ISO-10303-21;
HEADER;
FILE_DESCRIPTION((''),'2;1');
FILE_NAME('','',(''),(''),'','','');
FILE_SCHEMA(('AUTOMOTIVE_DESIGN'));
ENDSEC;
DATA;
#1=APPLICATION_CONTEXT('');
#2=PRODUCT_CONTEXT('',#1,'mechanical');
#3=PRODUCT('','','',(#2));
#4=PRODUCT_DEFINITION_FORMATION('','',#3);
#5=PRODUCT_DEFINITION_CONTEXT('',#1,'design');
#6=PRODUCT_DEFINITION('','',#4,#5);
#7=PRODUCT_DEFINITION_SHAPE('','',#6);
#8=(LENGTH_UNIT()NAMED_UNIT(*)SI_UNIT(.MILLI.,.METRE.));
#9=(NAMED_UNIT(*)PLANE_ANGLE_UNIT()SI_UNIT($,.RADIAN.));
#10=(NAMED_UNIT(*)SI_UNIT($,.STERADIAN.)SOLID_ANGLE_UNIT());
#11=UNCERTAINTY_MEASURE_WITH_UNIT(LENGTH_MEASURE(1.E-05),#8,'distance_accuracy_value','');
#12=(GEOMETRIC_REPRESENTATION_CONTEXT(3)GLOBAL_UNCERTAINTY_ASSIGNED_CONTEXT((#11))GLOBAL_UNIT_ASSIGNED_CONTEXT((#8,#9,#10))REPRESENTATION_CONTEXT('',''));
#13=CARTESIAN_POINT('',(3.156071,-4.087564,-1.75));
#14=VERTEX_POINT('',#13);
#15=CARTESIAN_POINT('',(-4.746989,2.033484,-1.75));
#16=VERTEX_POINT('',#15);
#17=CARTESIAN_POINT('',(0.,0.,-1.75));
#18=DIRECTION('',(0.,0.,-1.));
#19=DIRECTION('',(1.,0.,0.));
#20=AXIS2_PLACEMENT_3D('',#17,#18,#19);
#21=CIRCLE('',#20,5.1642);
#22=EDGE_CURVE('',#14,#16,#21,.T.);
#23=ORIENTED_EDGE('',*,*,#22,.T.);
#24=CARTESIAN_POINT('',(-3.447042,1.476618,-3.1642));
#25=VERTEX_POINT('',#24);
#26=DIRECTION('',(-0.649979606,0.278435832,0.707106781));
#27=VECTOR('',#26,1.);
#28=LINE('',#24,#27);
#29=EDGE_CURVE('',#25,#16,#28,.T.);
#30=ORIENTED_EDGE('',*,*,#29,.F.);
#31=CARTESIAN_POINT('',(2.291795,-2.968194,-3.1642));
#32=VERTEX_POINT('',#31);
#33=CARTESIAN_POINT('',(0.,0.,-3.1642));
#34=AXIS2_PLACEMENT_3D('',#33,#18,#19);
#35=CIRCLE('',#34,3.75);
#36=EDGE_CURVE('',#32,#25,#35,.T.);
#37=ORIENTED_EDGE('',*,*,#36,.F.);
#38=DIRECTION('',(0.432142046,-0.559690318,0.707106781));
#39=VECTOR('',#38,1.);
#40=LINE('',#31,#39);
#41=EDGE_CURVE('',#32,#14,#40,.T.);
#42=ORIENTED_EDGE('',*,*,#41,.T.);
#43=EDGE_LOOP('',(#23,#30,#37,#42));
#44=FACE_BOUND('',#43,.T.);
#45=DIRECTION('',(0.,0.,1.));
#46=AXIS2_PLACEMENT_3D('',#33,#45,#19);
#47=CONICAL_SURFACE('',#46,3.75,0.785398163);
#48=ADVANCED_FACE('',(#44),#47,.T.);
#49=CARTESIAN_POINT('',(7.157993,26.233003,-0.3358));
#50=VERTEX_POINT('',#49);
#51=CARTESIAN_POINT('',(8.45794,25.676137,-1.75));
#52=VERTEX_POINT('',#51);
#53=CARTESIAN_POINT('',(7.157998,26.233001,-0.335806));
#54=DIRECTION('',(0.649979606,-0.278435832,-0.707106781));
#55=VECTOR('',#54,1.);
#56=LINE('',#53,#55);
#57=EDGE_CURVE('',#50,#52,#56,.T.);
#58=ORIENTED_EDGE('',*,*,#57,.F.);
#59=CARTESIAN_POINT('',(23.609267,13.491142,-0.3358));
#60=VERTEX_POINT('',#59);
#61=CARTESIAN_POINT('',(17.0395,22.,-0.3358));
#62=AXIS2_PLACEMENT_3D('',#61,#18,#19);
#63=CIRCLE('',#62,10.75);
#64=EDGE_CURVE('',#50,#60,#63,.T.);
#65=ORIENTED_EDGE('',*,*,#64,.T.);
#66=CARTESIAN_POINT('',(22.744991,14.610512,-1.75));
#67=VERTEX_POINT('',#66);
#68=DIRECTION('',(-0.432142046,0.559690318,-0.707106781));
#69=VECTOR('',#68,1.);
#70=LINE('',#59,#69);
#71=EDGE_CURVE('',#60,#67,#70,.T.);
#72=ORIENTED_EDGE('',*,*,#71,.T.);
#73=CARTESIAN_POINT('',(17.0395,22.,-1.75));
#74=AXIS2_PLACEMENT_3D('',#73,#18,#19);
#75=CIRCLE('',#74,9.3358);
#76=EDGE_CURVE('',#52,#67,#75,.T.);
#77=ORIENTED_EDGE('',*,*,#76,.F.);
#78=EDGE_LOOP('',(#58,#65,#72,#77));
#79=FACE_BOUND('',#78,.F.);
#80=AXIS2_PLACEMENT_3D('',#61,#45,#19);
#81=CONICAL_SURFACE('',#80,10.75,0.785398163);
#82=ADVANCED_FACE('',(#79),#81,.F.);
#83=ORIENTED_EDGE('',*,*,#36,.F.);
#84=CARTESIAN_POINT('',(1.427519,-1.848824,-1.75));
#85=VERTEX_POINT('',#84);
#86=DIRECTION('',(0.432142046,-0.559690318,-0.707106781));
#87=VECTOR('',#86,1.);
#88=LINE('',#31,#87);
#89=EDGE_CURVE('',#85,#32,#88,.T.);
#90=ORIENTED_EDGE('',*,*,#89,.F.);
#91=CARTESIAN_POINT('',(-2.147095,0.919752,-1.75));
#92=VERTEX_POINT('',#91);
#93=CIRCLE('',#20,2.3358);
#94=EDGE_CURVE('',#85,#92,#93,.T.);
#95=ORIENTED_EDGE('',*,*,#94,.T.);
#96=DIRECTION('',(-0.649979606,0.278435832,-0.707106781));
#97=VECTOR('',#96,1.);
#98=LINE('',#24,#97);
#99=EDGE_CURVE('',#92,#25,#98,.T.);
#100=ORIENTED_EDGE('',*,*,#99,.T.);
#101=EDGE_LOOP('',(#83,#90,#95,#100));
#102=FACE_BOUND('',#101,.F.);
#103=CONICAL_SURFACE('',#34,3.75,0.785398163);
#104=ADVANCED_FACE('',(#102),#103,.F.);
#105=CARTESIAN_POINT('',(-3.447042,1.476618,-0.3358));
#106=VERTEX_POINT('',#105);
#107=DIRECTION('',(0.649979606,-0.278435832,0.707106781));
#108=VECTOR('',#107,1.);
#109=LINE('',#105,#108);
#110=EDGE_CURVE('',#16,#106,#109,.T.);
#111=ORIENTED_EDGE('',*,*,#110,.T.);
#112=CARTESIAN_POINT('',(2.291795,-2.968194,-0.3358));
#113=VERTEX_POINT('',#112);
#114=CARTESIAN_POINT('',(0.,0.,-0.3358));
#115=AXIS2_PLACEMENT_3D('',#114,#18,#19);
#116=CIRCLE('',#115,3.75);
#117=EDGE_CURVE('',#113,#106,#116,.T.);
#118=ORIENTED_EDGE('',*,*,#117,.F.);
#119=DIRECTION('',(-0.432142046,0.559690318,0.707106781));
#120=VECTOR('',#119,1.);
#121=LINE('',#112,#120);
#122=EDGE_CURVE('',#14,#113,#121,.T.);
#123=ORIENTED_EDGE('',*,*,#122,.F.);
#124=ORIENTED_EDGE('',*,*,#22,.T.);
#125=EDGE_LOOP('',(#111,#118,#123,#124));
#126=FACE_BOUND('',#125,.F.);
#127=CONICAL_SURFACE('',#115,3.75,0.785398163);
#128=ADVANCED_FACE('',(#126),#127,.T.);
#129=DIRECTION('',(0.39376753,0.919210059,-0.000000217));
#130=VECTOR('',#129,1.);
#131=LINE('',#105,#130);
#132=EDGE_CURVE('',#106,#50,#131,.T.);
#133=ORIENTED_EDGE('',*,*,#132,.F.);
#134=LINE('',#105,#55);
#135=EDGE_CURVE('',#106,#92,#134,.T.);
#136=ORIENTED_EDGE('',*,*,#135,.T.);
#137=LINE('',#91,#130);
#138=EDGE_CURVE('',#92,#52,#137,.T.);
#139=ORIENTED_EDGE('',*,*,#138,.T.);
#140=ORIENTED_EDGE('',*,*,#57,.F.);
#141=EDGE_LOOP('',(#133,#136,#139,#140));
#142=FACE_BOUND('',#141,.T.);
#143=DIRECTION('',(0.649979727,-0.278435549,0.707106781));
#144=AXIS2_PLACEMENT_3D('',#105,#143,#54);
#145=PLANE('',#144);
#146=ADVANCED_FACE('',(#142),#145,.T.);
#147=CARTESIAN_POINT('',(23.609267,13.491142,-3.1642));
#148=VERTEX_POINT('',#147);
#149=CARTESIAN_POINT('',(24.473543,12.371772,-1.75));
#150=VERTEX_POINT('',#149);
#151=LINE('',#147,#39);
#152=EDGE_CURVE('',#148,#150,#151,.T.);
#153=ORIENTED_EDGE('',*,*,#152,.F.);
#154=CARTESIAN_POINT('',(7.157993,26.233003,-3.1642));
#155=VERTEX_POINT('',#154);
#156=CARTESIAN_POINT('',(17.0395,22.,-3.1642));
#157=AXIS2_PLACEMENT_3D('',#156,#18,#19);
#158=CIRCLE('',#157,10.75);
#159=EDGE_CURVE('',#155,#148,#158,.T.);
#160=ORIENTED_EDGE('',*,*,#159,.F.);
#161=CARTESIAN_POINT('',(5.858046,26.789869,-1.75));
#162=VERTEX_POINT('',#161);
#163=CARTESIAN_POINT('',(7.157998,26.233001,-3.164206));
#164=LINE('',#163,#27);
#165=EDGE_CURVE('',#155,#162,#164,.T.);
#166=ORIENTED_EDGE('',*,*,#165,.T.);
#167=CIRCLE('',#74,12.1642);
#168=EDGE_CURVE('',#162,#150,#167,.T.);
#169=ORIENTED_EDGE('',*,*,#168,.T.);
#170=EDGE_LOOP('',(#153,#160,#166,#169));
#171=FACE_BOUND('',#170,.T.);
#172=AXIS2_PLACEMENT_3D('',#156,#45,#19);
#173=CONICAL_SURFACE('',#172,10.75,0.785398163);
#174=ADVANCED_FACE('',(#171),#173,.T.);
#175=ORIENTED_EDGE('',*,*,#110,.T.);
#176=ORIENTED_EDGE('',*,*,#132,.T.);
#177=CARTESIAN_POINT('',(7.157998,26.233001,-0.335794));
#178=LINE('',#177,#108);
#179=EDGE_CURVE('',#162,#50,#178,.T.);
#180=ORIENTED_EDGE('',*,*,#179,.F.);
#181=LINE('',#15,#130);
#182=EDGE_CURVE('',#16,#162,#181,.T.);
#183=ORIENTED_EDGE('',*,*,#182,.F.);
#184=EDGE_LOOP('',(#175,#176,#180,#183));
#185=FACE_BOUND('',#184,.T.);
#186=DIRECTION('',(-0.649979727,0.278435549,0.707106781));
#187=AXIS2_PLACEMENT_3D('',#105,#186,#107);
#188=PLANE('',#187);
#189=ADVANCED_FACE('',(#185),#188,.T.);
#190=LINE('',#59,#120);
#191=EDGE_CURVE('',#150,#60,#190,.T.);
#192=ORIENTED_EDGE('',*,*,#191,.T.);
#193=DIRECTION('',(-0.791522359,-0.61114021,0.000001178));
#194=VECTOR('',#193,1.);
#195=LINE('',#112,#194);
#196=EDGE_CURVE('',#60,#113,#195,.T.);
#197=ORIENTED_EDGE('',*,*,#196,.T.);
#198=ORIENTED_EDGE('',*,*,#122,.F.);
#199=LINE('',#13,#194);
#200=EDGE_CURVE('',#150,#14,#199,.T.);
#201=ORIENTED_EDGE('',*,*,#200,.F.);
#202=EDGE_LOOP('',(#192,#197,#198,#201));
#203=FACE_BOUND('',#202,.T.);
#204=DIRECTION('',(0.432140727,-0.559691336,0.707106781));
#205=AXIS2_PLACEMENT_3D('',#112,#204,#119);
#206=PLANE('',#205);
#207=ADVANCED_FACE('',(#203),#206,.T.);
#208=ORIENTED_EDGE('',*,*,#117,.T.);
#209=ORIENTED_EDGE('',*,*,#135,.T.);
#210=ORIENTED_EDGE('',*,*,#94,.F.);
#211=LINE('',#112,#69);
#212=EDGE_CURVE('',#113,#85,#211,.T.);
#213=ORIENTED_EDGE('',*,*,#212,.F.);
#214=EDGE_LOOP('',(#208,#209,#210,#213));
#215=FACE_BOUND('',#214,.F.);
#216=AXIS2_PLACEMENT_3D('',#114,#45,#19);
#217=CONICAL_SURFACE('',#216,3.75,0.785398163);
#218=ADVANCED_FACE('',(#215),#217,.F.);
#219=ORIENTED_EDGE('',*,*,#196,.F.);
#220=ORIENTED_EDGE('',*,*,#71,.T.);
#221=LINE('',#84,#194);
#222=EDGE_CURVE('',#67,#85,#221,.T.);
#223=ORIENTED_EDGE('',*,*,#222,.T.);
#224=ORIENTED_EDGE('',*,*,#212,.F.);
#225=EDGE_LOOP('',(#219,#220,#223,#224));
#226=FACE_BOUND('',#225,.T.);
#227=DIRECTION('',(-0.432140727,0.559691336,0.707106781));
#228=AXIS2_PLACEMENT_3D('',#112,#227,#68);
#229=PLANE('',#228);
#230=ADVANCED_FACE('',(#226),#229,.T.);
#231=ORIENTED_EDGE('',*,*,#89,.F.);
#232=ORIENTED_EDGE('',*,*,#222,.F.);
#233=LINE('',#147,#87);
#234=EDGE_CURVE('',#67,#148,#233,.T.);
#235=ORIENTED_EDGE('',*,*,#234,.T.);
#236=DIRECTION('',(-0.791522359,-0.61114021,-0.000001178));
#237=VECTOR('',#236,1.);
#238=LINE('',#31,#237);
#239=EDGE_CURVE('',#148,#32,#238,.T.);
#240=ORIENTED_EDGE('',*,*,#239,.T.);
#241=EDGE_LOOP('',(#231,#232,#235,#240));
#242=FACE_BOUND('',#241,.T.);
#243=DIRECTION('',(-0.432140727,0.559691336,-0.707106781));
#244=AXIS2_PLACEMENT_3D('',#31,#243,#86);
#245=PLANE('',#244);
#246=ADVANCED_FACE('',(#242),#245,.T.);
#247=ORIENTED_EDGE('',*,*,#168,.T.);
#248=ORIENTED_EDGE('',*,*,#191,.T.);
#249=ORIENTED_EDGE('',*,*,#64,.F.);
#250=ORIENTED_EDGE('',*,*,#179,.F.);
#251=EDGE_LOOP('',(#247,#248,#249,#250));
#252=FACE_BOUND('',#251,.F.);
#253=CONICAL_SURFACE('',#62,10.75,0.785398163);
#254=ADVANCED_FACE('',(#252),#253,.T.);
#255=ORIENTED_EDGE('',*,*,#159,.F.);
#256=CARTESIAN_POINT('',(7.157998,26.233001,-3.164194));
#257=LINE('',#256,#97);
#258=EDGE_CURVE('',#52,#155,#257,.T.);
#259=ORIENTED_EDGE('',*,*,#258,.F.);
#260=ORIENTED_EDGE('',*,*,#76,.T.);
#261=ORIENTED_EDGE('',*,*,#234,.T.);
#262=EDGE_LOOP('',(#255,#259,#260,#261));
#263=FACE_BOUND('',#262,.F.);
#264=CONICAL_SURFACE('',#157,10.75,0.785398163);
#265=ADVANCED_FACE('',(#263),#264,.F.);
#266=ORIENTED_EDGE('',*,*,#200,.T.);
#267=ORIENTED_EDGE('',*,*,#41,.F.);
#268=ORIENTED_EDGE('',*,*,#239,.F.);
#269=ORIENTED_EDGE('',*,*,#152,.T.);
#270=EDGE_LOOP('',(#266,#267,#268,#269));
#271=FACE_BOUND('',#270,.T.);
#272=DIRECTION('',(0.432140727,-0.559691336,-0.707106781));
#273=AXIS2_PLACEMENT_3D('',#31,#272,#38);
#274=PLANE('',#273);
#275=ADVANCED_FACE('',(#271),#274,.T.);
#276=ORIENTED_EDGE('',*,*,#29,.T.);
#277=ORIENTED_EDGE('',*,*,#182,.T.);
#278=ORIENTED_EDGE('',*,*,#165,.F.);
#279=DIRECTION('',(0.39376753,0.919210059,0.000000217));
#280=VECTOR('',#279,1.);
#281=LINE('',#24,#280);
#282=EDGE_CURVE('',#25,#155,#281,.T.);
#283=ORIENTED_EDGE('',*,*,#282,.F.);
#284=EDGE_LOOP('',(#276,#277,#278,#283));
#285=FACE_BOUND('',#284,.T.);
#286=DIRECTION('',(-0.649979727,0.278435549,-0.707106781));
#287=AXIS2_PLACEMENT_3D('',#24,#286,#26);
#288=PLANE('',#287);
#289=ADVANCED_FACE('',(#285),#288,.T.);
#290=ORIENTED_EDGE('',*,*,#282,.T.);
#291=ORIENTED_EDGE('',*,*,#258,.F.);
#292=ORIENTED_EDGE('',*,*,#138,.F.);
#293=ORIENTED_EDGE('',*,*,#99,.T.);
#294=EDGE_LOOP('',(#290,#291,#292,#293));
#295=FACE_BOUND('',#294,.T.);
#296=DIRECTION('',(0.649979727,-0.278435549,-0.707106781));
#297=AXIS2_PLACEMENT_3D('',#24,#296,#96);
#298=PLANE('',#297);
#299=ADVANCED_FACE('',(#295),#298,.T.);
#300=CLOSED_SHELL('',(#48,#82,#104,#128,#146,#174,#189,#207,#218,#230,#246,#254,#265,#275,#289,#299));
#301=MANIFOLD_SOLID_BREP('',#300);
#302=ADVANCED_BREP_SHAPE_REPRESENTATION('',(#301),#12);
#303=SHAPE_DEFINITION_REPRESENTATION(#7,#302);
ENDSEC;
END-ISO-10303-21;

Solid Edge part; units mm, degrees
sketch "Sketch1" plane through (0, 0, -1.75) normal (0, 0, 1) x (1, 0, 0)
  line L0 (-3.447, 1.4766) -> (7.158, 26.233)
  line L1 (2.2918, -2.9682) -> (23.6093, 13.4911)
  arc A0 (23.6093, 13.4911) -> (7.158, 26.233) centre (17.0395, 22) ccw
  arc A1 (2.2918, -2.9682) -> (-3.447, 1.4766) centre (0, 0) cw
sketch "Sketch2" plane through (17.0395, 0, 0) normal (-1, 0, 0) x (0, -1, 0)
  line L0 (-32.75, -0.3358) -> (-31.3358, -1.75)
  line L1 (-32.75, -3.1642) -> (-31.3358, -1.75)
  line L2 (-32.75, -3.1642) -> (-34.1642, -1.75)
  line L3 (-32.75, -0.3358) -> (-34.1642, -1.75)
sweep "Riemen_Twist" add profiles "Sketch2" path "Sketch1"
properties material "(None)"
